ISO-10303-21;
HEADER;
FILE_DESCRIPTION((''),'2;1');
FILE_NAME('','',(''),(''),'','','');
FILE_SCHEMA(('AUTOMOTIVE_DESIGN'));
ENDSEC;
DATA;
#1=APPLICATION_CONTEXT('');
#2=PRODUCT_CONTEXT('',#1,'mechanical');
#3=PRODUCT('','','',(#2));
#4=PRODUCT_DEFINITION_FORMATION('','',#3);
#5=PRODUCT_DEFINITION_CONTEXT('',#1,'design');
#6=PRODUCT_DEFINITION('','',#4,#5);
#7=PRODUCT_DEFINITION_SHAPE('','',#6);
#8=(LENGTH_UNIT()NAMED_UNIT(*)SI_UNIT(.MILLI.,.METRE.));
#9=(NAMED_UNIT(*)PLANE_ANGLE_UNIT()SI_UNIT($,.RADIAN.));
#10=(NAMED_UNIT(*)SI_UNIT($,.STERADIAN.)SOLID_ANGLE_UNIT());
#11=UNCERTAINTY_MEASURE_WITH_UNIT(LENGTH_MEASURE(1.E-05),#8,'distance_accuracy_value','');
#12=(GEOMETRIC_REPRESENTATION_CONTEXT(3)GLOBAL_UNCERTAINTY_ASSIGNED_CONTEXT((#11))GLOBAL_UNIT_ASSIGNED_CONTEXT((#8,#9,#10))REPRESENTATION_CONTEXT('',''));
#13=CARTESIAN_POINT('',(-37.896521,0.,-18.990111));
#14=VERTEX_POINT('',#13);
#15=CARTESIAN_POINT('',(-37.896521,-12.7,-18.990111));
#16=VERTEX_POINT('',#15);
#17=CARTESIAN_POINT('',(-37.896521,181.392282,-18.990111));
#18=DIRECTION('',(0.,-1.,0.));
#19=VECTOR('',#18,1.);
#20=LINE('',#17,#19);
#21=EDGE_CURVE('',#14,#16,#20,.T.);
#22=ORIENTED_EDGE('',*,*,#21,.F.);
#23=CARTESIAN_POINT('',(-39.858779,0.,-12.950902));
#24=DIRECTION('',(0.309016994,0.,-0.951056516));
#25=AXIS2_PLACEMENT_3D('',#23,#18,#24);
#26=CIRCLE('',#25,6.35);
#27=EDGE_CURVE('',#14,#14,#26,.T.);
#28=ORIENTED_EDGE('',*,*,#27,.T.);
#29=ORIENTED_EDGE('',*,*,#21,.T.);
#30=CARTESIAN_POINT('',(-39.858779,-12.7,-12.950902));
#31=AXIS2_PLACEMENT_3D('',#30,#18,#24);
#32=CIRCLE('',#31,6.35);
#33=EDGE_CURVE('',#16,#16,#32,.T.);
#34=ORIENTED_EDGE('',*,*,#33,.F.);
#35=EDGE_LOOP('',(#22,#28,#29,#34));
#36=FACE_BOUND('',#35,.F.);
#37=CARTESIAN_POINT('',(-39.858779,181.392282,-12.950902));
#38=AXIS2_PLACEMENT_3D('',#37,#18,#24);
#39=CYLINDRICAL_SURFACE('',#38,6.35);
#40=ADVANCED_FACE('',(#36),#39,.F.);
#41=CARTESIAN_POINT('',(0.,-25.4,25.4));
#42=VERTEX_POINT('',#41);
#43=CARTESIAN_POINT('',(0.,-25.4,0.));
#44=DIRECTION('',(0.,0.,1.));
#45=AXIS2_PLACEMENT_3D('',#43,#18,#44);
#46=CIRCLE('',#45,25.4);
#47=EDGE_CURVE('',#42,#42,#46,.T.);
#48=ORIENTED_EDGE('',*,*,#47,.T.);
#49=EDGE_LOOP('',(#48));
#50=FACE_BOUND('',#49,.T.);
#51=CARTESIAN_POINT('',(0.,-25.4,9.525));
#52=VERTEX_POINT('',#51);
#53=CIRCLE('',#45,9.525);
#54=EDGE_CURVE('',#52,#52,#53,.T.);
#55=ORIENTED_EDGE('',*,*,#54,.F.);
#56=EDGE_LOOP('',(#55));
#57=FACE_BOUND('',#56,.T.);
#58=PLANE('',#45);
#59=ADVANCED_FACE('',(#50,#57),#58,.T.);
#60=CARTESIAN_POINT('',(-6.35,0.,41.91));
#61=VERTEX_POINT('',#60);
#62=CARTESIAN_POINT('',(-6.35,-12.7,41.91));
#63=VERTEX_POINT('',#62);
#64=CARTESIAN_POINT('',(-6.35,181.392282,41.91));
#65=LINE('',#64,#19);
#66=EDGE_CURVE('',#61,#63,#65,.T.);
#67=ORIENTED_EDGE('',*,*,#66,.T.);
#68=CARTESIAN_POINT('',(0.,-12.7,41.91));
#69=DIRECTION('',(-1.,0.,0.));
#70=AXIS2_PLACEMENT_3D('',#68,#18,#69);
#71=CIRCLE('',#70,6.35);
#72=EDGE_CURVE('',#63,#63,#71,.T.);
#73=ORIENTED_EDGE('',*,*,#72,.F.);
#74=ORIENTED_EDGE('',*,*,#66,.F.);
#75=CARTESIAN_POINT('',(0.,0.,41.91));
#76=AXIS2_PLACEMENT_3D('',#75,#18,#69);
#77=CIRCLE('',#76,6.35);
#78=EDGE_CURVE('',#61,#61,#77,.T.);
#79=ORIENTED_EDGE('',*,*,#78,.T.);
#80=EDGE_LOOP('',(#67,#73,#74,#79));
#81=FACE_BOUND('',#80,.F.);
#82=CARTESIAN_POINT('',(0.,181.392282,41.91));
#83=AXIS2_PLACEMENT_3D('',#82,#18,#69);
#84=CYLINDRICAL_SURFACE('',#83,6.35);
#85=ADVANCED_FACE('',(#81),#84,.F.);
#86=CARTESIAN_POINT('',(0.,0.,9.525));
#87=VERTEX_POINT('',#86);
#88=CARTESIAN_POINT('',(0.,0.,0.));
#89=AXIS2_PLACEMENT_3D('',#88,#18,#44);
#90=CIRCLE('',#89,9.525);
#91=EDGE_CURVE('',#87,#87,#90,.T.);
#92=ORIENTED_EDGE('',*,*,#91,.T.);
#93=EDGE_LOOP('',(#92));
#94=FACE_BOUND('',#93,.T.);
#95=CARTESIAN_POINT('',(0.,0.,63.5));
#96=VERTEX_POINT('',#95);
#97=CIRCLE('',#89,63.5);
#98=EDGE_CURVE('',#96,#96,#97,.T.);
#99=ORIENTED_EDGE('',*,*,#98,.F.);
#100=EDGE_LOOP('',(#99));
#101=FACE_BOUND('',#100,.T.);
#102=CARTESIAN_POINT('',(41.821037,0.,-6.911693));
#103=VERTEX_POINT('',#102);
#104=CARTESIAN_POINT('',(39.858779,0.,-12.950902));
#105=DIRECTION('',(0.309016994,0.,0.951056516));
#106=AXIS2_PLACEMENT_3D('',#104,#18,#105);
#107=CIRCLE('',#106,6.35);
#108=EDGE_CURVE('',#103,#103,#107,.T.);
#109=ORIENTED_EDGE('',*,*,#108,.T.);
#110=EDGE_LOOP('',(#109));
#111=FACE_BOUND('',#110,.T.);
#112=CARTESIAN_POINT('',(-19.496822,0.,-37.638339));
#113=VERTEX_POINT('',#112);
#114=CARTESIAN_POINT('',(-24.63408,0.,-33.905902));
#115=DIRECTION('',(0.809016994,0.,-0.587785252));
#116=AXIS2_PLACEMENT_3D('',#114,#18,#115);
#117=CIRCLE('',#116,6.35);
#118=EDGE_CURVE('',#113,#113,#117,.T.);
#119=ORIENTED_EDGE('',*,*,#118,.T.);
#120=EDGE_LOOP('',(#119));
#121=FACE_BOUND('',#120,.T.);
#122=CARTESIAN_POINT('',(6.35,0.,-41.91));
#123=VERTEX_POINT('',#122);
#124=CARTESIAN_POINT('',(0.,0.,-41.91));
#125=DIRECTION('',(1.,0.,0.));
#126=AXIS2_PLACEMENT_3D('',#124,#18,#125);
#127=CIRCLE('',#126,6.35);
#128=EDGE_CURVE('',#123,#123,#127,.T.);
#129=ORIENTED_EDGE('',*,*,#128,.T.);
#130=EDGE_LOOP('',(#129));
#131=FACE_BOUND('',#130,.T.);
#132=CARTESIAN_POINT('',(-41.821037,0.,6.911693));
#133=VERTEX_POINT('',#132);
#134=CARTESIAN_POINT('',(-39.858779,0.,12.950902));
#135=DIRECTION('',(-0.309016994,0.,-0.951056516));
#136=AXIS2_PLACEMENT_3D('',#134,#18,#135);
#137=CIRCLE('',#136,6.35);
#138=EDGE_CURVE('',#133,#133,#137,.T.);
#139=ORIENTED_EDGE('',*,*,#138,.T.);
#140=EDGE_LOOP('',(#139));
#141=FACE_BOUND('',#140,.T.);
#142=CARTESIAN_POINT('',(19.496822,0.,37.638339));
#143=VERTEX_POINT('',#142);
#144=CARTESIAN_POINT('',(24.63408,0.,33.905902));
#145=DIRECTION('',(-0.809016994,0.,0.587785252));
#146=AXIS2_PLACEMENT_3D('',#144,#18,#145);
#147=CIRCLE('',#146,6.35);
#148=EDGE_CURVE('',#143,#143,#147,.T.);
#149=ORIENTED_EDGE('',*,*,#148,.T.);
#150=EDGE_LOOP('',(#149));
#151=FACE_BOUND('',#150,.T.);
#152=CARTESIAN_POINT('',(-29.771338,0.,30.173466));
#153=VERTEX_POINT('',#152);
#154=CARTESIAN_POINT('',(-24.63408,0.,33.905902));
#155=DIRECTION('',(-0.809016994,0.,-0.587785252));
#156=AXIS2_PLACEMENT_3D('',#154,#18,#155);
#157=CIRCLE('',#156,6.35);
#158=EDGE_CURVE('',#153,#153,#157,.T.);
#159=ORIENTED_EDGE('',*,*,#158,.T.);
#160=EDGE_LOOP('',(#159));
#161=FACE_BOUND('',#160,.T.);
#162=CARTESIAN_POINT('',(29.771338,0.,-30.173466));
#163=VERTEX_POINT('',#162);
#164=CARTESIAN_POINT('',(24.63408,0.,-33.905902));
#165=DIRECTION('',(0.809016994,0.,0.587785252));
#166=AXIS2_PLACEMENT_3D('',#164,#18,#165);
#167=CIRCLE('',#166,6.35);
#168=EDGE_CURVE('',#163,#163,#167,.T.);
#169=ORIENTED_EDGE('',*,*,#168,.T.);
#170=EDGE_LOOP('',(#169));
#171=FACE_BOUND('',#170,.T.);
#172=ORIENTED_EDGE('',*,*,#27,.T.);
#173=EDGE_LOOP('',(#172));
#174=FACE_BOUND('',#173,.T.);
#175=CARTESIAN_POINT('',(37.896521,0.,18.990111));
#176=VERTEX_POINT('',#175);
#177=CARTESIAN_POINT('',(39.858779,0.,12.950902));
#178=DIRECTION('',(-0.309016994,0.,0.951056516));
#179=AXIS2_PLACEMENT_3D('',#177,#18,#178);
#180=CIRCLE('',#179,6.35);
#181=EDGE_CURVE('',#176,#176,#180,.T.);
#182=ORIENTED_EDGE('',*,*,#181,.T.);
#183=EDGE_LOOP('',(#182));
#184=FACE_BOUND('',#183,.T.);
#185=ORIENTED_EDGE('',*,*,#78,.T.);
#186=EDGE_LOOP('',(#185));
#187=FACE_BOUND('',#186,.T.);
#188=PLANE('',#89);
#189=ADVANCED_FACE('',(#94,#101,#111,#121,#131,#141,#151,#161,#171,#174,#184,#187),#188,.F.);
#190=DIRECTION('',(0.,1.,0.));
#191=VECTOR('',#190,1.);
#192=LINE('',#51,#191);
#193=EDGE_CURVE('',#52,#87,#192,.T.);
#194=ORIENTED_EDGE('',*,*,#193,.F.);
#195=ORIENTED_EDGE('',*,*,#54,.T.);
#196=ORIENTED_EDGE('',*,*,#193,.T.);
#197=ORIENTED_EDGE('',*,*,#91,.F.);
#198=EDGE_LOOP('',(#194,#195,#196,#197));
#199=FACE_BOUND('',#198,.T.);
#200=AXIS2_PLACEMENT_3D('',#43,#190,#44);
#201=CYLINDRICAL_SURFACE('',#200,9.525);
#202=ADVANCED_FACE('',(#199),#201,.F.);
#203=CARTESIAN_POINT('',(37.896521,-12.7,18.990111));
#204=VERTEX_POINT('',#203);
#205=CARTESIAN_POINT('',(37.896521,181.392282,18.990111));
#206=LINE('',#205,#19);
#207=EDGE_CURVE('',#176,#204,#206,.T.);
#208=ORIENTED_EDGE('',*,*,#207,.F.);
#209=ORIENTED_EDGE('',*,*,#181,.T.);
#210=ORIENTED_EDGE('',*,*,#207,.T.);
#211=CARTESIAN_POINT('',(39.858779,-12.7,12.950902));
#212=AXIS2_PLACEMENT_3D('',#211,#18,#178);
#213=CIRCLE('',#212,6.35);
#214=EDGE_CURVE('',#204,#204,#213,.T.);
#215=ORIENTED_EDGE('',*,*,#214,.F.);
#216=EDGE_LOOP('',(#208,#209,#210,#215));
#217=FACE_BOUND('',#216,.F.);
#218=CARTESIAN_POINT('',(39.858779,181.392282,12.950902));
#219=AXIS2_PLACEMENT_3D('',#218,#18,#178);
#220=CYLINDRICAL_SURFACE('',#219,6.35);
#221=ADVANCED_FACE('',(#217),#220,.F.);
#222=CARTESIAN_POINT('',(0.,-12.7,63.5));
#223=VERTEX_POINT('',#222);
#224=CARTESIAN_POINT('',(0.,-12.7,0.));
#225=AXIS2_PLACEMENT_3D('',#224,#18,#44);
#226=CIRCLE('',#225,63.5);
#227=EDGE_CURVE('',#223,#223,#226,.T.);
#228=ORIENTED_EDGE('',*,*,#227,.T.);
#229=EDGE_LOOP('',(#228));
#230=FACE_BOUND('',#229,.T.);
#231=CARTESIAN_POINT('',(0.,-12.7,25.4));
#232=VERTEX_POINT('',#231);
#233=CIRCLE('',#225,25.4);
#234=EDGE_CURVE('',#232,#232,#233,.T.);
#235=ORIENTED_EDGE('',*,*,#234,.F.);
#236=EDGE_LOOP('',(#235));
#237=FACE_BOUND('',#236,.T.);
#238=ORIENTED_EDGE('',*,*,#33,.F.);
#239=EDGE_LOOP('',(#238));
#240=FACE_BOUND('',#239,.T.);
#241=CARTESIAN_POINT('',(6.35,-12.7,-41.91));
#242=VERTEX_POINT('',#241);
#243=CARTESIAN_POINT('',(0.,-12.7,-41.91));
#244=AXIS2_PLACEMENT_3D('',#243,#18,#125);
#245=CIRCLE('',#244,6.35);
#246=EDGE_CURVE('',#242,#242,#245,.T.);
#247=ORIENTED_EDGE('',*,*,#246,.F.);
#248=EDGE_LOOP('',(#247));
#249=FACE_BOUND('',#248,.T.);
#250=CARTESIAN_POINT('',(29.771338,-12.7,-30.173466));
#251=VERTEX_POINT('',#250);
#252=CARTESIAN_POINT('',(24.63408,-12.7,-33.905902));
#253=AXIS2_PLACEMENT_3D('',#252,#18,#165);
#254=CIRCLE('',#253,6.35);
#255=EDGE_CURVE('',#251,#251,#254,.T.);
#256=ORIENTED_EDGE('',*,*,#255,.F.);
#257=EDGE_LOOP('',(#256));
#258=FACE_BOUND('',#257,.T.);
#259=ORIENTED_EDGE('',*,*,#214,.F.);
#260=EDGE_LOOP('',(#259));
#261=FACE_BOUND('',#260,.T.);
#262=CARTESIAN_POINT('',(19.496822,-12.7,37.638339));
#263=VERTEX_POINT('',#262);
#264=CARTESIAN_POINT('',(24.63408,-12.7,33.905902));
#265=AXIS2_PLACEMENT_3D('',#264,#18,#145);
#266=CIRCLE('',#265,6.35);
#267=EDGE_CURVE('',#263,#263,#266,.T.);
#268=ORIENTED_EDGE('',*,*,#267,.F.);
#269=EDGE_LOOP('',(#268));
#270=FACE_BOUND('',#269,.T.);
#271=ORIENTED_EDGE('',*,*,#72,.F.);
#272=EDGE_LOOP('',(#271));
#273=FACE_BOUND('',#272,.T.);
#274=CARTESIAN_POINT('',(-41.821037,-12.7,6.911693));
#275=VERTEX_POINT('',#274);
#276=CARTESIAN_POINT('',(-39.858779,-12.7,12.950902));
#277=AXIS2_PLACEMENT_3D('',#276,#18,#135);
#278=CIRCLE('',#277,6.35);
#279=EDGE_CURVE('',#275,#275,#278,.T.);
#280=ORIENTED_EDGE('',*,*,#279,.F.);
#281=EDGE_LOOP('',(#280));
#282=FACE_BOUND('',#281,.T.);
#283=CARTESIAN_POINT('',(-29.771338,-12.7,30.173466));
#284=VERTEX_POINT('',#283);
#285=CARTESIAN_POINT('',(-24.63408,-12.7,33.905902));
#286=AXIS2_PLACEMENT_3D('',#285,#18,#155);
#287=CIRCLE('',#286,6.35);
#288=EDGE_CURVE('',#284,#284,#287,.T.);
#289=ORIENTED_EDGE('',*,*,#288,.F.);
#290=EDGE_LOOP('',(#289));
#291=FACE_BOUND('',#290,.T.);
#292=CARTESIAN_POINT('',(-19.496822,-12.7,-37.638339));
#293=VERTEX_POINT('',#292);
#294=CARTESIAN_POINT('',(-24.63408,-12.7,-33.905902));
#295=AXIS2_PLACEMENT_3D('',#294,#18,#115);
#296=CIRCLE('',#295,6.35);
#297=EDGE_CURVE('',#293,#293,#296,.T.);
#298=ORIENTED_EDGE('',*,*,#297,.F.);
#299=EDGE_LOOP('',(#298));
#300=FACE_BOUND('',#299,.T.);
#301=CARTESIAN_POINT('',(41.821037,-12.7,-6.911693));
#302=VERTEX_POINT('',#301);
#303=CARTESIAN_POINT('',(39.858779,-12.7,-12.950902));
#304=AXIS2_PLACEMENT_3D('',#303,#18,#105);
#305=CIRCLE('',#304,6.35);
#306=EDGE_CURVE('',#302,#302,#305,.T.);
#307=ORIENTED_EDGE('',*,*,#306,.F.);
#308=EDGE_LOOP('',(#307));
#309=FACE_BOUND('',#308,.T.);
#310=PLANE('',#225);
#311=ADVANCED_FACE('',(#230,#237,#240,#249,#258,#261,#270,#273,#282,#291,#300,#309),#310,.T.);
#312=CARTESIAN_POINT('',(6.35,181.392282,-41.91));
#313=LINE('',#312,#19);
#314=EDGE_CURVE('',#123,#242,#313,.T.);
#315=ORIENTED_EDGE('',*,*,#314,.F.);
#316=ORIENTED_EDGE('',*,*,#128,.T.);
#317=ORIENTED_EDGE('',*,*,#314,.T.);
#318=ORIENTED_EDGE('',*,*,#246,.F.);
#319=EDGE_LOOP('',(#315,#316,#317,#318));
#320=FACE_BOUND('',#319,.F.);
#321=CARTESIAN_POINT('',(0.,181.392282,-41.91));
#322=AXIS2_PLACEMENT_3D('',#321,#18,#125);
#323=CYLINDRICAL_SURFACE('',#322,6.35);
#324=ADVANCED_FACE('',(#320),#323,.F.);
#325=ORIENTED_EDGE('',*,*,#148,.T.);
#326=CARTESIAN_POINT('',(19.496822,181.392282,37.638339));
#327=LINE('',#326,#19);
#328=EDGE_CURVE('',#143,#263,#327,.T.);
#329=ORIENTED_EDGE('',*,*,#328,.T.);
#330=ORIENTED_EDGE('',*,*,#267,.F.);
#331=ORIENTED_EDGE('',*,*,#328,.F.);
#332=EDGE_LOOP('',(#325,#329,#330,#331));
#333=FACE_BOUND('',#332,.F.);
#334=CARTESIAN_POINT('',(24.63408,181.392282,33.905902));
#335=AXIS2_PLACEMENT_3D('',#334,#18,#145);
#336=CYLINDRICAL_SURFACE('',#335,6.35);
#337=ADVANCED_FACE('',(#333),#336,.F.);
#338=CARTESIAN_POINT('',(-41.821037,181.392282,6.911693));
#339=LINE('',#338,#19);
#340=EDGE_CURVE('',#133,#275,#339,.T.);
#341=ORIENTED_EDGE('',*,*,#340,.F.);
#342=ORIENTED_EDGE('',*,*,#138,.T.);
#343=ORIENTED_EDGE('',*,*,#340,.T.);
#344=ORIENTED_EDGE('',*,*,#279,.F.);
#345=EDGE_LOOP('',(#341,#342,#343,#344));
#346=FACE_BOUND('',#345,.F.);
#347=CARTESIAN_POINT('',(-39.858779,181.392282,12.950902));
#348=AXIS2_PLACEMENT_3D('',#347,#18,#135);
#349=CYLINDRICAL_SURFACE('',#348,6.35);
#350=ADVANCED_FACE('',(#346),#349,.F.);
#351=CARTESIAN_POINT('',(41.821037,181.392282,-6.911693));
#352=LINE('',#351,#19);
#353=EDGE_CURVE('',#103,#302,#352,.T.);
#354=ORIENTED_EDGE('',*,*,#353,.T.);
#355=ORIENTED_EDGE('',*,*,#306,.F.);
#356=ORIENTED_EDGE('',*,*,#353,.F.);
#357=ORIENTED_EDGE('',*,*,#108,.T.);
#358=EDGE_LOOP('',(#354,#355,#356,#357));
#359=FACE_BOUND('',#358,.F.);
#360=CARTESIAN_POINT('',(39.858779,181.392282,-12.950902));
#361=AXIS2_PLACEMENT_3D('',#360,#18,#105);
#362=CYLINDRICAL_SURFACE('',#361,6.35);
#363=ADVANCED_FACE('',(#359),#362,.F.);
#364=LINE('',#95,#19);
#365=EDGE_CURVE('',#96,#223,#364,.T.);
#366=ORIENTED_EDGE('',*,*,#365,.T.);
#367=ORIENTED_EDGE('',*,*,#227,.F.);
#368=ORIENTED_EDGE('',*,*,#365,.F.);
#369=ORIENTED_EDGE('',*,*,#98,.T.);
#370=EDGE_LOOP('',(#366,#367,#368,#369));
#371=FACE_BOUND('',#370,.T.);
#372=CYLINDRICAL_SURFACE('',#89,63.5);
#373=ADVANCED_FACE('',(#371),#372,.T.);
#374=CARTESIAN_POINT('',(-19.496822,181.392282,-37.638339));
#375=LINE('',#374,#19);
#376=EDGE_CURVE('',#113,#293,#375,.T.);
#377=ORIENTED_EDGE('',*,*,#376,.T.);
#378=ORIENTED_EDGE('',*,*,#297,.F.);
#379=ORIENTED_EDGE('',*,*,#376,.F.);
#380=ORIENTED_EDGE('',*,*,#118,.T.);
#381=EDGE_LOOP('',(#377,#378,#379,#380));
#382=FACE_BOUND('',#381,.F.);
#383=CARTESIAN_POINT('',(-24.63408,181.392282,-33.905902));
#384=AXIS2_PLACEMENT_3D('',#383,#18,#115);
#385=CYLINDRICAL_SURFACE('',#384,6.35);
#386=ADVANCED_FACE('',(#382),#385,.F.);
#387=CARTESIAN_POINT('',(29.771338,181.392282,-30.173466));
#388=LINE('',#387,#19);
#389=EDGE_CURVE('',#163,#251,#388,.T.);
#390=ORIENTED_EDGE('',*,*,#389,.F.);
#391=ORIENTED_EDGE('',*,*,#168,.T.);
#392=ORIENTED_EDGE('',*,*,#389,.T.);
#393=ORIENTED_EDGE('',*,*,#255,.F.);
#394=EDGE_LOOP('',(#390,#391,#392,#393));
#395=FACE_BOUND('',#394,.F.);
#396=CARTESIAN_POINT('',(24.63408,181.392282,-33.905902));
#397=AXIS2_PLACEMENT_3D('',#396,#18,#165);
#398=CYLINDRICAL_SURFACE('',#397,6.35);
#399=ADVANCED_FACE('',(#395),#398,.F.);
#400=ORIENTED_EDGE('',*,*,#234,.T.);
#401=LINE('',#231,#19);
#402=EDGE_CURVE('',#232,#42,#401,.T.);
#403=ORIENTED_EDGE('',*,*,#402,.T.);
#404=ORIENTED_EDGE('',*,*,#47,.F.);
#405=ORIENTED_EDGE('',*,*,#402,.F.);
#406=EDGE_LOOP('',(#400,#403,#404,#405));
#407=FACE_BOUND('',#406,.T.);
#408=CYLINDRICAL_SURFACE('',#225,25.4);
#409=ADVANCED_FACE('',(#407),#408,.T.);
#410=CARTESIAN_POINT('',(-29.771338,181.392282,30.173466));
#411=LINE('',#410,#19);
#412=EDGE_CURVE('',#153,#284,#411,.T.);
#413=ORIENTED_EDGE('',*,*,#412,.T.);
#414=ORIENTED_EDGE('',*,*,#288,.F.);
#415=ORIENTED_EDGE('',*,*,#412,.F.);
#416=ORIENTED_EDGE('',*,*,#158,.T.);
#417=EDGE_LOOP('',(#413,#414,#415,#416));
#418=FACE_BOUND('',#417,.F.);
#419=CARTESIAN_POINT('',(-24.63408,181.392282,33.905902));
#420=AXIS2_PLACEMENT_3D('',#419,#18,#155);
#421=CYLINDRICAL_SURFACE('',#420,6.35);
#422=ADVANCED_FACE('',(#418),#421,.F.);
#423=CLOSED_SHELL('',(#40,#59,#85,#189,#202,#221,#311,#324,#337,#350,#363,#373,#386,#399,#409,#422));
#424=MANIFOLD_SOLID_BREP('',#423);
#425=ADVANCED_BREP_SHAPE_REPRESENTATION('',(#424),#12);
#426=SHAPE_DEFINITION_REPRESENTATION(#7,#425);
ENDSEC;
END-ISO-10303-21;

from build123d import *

# Parameters (mm, degrees)
F3_D            = 12.7
F3_COPIES_COUNT = 10


# Not quite as in the source:
# - a pattern or mirror of a feature is missing from the dataset's text; its kind, count and spacing are read off the source's solid


with BuildPart() as f1:
    # F0 (on Right) → F1 (revolve)
    with BuildSketch(Plane.YZ):
        Polygon((-25.4, 25.4), (-25.4, 9.525), (0, 9.525), (0, 63.5), (-12.7, 63.5), (-12.7, 25.4), align=None)
    revolve(axis=Axis((0, -12.7, 0), (0, -1, 0)))

    # F3 (through all)
    with Locations(Plane(origin=(0, 0, 0), x_dir=(1, 0, 0), z_dir=(0, 1, 0))):
        with Locations((0, -41.91)):
            f3 = Hole(F3_D / 2)

    # F3_copies: F3 ×10 about axis
    f3_copies_axis = Axis((0, 0, 0), (0, 1, 0))
    for i in range(1, F3_COPIES_COUNT):
        add(f3.rotate(f3_copies_axis, i * 360 / F3_COPIES_COUNT), mode=Mode.SUBTRACT)


solid = f1.part
